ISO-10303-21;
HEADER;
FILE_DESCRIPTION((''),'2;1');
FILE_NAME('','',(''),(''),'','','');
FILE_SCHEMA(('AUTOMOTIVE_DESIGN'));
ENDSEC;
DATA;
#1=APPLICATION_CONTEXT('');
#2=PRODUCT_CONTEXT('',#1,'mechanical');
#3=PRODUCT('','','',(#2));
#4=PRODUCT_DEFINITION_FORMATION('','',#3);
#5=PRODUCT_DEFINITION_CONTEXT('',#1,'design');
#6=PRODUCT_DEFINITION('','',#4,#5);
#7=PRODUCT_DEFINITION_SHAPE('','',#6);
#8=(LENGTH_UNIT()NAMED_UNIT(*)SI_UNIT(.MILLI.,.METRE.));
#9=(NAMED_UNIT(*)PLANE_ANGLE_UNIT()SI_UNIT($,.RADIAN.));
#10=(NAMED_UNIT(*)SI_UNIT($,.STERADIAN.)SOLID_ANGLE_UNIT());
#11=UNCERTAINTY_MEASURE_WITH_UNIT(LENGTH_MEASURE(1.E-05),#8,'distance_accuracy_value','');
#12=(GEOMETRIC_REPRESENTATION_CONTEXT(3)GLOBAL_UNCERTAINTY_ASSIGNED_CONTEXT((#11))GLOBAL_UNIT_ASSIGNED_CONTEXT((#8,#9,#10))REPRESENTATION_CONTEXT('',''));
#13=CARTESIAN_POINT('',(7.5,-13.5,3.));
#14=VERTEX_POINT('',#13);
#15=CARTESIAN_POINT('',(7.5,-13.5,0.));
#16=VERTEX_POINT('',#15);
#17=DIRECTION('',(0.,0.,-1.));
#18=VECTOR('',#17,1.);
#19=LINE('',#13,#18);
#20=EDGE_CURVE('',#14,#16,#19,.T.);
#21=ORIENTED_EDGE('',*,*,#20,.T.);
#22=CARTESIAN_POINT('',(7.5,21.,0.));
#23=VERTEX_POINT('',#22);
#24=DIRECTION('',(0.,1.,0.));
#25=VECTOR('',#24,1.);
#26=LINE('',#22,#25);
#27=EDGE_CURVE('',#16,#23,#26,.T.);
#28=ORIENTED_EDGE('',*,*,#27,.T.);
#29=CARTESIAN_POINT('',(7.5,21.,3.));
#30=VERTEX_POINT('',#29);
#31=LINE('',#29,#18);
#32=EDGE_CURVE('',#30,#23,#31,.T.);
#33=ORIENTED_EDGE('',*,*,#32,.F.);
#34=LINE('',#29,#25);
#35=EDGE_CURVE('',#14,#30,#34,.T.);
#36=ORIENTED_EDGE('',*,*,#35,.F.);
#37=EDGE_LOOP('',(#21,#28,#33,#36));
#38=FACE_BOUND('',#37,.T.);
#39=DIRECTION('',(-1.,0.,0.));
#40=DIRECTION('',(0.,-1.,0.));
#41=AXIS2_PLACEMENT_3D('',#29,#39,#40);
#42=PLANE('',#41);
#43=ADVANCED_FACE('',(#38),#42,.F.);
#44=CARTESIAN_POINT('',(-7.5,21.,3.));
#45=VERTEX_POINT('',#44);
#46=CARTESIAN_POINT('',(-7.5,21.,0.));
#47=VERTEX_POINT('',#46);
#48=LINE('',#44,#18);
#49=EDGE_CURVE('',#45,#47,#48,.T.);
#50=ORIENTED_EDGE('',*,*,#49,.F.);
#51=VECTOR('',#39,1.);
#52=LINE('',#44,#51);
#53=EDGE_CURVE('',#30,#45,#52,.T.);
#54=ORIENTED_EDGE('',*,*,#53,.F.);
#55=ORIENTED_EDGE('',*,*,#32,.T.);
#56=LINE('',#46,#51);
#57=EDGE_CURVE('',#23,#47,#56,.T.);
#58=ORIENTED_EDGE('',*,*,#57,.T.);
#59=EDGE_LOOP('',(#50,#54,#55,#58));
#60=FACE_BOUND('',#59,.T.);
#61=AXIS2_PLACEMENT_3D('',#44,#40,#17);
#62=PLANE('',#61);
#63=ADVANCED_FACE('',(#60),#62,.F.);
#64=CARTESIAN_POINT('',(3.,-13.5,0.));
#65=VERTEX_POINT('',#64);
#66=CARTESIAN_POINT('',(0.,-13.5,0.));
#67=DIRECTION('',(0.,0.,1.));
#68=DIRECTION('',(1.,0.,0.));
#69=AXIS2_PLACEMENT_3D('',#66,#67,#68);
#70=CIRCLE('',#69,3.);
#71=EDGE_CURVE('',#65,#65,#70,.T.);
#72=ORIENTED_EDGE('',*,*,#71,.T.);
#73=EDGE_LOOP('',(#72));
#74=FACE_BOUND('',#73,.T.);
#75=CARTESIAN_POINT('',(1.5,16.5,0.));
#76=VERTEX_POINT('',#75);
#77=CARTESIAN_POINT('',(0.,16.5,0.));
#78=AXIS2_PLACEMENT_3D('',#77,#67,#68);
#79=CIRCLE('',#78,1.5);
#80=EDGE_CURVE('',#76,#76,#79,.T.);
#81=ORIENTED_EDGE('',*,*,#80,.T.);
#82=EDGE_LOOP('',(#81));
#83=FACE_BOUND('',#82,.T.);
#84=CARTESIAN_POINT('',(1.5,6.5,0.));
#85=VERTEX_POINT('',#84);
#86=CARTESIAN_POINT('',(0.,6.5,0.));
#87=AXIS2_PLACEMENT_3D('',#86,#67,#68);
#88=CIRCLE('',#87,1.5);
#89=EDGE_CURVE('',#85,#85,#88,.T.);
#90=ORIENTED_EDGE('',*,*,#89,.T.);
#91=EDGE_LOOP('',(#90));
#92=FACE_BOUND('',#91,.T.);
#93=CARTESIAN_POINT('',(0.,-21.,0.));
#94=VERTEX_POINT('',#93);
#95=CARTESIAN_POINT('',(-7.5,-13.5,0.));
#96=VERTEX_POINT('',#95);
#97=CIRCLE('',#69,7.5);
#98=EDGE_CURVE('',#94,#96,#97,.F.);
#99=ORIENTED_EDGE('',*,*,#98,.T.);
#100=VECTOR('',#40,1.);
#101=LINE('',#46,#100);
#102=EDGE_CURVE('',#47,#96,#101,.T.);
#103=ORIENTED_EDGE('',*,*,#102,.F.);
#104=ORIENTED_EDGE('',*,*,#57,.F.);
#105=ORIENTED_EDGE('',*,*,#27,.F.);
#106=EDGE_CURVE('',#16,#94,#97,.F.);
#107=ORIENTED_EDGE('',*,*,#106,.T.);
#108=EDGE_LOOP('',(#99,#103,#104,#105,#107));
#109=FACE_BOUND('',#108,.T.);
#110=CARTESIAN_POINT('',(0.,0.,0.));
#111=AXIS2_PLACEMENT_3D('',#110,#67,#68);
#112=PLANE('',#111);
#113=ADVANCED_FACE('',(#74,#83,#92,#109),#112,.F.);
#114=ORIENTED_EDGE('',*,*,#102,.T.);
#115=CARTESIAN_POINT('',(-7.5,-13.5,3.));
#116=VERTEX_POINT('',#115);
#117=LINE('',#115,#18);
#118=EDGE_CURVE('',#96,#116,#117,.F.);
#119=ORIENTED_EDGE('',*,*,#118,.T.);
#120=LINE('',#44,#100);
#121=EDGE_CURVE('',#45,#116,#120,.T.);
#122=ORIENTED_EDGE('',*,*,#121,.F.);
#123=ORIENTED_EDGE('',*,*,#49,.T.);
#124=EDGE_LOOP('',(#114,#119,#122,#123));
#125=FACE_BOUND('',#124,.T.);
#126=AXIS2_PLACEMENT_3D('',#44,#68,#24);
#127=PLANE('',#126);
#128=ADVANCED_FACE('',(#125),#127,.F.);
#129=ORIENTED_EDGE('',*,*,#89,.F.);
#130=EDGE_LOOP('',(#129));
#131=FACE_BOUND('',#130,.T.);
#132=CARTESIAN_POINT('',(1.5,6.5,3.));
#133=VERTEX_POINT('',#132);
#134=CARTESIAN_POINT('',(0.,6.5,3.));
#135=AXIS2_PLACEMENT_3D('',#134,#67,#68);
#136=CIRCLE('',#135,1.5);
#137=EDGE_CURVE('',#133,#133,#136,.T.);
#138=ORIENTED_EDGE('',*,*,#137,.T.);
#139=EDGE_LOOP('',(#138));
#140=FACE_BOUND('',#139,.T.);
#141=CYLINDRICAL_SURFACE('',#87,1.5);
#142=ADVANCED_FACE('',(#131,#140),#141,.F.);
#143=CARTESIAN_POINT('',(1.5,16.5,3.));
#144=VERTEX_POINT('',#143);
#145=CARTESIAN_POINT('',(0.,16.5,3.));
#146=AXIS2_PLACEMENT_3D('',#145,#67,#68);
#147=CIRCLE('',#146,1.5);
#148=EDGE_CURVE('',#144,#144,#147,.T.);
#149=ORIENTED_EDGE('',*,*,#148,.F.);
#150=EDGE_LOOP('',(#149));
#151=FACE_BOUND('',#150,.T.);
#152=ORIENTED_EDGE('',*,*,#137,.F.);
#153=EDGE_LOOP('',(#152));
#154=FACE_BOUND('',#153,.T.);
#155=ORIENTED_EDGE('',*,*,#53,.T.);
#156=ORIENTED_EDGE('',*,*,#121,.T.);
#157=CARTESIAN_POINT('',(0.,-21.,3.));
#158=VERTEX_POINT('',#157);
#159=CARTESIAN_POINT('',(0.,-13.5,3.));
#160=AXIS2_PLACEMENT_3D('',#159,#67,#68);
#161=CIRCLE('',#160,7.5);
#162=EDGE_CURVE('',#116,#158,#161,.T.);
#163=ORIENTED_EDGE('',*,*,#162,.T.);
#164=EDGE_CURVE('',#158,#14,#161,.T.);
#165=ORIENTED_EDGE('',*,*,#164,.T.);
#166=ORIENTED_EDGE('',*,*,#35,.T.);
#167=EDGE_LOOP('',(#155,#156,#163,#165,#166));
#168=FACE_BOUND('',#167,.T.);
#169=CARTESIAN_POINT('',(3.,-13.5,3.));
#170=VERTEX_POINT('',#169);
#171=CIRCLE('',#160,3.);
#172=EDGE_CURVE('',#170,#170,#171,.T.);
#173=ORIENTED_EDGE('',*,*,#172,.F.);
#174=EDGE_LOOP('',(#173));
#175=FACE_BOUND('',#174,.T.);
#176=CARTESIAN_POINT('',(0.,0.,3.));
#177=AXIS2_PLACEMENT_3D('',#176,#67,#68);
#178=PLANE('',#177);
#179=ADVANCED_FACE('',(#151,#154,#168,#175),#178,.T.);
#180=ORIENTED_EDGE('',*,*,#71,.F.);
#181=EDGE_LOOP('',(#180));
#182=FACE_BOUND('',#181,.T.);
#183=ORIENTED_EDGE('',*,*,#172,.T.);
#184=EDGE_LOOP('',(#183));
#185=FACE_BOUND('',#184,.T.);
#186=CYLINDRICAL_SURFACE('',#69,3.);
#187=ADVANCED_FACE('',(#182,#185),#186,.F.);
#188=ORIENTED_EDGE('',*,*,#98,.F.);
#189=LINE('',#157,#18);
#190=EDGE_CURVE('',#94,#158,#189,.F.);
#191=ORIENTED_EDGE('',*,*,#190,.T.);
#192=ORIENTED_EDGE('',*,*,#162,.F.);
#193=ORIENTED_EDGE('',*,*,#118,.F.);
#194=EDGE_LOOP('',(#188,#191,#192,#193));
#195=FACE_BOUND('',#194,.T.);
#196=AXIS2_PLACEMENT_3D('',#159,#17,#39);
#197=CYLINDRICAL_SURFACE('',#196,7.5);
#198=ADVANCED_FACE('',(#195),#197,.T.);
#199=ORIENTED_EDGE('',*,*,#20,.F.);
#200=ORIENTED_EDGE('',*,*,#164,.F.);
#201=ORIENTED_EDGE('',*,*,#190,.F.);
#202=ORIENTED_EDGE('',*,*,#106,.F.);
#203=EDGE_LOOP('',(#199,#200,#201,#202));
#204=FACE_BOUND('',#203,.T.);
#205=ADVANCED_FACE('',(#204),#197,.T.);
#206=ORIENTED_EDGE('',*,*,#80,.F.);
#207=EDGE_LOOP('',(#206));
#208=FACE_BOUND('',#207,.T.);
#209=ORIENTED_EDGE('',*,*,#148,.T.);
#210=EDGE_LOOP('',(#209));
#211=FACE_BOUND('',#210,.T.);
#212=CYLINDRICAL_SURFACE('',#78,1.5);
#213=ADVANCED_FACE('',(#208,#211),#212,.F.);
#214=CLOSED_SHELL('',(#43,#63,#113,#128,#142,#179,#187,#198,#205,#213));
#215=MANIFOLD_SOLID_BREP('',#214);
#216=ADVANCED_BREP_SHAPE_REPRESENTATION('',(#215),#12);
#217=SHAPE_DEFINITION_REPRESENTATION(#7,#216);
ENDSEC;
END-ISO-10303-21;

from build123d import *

# Parameters (mm, degrees)
SKETCH_1_W          = 15
SKETCH_1_H          = 42
EXTRUDE_1_DEPTH     = 3
SKETCH_3_R          = 1.5
SKETCH_3_R_2        = 3
CUT_EXTRUDE_1_DEPTH = 23.5
FILLET_1_R          = 7.5


with BuildPart() as part:
    # 草图1 → 凸台-拉伸1 (new body)
    with BuildSketch(Plane.XY):
        Rectangle(SKETCH_1_W, SKETCH_1_H)
    extrude(amount=EXTRUDE_1_DEPTH)

    # 草图3 → 切除-拉伸1 (cut, through all)
    with BuildSketch(Plane.XY.offset(3)):
        with Locations((0, 16.5)):
            Circle(SKETCH_3_R)
        with Locations((0, 6.5)):
            Circle(SKETCH_3_R)
        with Locations((0, -13.5)):
            Circle(SKETCH_3_R_2)
    extrude(amount=-CUT_EXTRUDE_1_DEPTH, mode=Mode.SUBTRACT)

    # 圆角1
    fillet_1_edges = [part.edges().sort_by_distance(p)[0] for p in [
        (-7.5, -21, 1.5),
        (7.5, -21, 1.5),
    ]]
    fillet(fillet_1_edges, radius=FILLET_1_R - 0.0001)  # a hair under: the kernel refuses the full size


solid = part.part
